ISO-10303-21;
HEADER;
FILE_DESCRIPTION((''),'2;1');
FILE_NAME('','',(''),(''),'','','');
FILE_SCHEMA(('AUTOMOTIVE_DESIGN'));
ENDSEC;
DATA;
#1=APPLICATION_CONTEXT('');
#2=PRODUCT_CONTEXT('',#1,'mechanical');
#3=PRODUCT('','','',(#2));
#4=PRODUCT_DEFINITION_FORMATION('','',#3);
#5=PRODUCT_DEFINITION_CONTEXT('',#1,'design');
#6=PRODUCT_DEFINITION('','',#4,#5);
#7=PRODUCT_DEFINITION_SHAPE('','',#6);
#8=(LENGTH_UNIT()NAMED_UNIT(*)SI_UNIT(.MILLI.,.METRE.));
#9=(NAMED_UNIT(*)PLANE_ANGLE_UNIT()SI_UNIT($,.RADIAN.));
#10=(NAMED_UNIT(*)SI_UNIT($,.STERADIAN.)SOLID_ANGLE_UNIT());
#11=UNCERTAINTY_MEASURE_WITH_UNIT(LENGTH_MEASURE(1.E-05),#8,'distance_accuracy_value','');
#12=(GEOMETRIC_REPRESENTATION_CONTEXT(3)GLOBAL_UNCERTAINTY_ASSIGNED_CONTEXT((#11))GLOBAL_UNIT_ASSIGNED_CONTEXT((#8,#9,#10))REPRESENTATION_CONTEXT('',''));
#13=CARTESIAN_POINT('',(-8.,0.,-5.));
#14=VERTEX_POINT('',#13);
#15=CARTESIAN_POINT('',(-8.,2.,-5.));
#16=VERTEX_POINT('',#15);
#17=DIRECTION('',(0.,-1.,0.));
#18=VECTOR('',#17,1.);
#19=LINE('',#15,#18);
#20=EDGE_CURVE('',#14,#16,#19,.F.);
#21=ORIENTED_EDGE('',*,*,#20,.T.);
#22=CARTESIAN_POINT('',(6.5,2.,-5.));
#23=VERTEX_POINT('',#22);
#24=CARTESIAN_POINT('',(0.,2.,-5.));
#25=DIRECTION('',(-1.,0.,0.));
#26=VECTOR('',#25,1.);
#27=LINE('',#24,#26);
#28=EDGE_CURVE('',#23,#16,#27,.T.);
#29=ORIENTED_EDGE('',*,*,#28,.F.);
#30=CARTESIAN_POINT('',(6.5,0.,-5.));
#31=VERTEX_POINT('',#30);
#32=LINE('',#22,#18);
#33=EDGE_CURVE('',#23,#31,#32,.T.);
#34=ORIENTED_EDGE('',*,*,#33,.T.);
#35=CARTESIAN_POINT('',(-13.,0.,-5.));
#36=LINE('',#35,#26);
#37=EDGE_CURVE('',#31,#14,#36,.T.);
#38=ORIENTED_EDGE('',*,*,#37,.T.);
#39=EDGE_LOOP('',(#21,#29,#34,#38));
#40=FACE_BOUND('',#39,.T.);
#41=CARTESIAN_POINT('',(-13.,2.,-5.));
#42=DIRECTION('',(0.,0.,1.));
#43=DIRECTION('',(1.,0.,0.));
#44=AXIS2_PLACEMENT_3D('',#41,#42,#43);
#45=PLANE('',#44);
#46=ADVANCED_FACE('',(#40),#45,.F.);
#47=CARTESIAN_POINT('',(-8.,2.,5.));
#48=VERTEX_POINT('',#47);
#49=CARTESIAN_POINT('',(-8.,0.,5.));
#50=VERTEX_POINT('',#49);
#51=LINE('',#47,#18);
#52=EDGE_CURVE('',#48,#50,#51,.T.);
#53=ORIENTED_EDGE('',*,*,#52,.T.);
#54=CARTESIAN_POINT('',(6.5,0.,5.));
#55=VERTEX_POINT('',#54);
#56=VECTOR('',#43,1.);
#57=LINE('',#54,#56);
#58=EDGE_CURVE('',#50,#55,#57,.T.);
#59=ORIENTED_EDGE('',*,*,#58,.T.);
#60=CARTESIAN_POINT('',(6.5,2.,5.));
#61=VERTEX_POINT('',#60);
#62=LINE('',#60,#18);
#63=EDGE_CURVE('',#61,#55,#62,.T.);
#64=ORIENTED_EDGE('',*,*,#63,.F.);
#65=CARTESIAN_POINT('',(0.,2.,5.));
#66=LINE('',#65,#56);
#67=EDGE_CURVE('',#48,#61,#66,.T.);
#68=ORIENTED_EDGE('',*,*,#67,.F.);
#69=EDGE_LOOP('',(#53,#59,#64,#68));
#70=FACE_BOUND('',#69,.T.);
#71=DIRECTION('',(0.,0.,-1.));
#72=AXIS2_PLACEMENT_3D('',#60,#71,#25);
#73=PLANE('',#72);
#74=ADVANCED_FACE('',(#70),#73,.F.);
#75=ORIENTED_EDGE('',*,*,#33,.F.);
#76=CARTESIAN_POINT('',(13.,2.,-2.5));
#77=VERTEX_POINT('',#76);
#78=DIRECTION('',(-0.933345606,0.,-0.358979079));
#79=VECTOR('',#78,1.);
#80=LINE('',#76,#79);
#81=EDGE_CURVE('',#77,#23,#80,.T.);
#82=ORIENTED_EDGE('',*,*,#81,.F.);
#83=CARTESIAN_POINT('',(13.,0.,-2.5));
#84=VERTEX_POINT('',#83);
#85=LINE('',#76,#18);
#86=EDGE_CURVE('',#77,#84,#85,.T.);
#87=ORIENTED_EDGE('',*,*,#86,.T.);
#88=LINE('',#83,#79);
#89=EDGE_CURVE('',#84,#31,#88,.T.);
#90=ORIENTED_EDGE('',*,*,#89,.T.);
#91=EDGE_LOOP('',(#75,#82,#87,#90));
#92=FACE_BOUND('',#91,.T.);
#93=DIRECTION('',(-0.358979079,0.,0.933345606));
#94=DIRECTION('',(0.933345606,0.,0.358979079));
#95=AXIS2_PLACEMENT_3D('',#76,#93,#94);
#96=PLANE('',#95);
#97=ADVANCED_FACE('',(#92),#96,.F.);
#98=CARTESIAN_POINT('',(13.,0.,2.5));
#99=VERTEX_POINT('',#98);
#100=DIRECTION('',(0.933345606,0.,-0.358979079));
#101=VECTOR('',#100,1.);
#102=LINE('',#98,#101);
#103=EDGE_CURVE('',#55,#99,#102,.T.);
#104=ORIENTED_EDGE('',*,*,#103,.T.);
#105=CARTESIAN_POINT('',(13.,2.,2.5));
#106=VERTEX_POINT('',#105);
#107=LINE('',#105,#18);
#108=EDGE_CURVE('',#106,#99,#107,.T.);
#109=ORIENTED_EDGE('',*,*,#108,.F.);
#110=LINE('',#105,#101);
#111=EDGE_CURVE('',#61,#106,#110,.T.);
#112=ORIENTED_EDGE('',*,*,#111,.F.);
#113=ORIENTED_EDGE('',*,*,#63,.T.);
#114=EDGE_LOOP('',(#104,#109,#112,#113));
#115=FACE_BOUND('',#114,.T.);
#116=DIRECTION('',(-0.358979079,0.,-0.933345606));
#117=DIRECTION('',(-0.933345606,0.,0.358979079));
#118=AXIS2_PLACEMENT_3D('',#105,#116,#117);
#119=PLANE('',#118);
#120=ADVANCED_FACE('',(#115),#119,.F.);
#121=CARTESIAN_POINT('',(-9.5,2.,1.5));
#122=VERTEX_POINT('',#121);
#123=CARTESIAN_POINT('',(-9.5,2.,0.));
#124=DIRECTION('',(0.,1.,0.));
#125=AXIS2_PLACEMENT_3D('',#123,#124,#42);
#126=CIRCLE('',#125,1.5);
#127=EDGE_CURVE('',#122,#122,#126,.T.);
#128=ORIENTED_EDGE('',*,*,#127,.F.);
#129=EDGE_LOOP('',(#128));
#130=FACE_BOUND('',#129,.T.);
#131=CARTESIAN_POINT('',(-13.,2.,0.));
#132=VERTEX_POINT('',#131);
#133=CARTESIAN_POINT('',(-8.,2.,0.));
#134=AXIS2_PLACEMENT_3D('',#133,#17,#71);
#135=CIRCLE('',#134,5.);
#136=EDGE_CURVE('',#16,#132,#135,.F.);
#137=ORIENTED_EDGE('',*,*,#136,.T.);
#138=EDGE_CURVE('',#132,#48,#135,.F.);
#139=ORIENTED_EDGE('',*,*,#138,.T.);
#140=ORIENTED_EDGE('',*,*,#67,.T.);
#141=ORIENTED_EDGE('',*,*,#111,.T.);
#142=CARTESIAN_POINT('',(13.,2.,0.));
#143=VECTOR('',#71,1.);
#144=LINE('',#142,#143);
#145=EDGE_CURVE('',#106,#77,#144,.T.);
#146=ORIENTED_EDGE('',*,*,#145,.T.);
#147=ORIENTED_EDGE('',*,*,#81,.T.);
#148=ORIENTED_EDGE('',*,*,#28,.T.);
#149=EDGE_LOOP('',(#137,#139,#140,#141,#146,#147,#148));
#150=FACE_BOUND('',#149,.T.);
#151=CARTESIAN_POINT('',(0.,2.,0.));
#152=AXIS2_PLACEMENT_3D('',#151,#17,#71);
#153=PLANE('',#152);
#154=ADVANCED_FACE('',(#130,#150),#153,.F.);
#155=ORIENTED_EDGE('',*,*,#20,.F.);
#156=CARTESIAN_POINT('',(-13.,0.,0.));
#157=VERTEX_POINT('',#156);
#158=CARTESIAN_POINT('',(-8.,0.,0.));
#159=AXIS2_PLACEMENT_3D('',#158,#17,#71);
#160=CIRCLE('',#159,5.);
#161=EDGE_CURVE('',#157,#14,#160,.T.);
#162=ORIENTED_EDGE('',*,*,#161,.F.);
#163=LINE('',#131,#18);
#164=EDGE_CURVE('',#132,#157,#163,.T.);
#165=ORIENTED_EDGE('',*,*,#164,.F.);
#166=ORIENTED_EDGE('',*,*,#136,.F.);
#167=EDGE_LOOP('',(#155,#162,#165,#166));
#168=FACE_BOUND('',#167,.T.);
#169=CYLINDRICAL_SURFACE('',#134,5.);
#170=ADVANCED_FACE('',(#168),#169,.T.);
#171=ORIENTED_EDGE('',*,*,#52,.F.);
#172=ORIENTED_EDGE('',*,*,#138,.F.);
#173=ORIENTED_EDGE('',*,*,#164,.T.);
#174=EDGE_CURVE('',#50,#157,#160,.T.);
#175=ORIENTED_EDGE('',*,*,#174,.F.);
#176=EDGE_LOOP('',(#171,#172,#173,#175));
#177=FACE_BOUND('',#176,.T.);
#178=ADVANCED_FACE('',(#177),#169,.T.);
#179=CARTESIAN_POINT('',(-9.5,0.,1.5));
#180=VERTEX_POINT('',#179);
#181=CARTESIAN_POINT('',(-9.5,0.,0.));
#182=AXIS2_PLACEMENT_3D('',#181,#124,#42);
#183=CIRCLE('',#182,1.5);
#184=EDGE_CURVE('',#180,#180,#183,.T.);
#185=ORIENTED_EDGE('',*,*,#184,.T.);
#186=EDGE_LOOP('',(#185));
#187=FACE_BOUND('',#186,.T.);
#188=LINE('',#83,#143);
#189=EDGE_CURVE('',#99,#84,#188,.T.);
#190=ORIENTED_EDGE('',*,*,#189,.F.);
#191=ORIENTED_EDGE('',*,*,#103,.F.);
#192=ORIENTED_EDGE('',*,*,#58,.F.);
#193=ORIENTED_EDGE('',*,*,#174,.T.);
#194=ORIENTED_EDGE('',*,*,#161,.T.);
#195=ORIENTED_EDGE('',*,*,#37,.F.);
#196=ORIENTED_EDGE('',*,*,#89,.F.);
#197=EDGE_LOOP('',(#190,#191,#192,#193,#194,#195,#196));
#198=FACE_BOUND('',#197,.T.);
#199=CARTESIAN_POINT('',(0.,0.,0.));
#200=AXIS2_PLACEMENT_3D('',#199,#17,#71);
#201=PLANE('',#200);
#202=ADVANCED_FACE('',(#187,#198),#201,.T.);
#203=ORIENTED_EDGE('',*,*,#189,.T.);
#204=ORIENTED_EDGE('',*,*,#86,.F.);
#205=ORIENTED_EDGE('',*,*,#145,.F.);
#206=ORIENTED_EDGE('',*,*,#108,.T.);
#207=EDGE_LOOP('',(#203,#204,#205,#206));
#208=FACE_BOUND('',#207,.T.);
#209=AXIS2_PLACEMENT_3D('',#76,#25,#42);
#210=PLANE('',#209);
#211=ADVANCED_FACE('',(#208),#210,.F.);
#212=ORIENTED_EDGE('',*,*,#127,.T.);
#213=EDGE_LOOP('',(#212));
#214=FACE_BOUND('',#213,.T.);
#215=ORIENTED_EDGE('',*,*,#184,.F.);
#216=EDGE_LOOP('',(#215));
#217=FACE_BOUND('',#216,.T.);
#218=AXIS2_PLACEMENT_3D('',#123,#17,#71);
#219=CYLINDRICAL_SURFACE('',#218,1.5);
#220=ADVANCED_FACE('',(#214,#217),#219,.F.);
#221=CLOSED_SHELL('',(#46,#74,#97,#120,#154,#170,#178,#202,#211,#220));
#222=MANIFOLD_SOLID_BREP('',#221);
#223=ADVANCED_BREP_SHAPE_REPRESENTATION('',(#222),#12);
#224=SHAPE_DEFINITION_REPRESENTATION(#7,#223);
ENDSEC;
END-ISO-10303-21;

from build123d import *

# Parameters (mm, degrees)
CROQUIS1_R              = 1.5
SALIENTE_EXTRUIR1_DEPTH = 2
REDONDEO1_R             = 5


with BuildPart() as part:
    # Croquis1 → Saliente-Extruir1 (new body)
    with BuildSketch(Plane(origin=(0, 0, 0), x_dir=(1, 0, 0), z_dir=(0, 1, 0))):
        Polygon((-13, 0), (-13, 5), (0, 5), (6.5, 5), (13, 2.5), (13, 0), (13, -2.5), (6.5, -5), (0, -5), (-13, -5), align=None)
        with Locations(Location((-9.5, 0, 0), (0, 0, 270))):
            Circle(CROQUIS1_R, mode=Mode.SUBTRACT)
    extrude(amount=SALIENTE_EXTRUIR1_DEPTH)

    # Redondeo1
    redondeo1_edges = [part.edges().sort_by_distance(p)[0] for p in [
        (-13, 1, 5),
        (-13, 1, -5),
    ]]
    fillet(redondeo1_edges, radius=REDONDEO1_R - 0.0001)  # a hair under: the kernel refuses the full size


solid = part.part
